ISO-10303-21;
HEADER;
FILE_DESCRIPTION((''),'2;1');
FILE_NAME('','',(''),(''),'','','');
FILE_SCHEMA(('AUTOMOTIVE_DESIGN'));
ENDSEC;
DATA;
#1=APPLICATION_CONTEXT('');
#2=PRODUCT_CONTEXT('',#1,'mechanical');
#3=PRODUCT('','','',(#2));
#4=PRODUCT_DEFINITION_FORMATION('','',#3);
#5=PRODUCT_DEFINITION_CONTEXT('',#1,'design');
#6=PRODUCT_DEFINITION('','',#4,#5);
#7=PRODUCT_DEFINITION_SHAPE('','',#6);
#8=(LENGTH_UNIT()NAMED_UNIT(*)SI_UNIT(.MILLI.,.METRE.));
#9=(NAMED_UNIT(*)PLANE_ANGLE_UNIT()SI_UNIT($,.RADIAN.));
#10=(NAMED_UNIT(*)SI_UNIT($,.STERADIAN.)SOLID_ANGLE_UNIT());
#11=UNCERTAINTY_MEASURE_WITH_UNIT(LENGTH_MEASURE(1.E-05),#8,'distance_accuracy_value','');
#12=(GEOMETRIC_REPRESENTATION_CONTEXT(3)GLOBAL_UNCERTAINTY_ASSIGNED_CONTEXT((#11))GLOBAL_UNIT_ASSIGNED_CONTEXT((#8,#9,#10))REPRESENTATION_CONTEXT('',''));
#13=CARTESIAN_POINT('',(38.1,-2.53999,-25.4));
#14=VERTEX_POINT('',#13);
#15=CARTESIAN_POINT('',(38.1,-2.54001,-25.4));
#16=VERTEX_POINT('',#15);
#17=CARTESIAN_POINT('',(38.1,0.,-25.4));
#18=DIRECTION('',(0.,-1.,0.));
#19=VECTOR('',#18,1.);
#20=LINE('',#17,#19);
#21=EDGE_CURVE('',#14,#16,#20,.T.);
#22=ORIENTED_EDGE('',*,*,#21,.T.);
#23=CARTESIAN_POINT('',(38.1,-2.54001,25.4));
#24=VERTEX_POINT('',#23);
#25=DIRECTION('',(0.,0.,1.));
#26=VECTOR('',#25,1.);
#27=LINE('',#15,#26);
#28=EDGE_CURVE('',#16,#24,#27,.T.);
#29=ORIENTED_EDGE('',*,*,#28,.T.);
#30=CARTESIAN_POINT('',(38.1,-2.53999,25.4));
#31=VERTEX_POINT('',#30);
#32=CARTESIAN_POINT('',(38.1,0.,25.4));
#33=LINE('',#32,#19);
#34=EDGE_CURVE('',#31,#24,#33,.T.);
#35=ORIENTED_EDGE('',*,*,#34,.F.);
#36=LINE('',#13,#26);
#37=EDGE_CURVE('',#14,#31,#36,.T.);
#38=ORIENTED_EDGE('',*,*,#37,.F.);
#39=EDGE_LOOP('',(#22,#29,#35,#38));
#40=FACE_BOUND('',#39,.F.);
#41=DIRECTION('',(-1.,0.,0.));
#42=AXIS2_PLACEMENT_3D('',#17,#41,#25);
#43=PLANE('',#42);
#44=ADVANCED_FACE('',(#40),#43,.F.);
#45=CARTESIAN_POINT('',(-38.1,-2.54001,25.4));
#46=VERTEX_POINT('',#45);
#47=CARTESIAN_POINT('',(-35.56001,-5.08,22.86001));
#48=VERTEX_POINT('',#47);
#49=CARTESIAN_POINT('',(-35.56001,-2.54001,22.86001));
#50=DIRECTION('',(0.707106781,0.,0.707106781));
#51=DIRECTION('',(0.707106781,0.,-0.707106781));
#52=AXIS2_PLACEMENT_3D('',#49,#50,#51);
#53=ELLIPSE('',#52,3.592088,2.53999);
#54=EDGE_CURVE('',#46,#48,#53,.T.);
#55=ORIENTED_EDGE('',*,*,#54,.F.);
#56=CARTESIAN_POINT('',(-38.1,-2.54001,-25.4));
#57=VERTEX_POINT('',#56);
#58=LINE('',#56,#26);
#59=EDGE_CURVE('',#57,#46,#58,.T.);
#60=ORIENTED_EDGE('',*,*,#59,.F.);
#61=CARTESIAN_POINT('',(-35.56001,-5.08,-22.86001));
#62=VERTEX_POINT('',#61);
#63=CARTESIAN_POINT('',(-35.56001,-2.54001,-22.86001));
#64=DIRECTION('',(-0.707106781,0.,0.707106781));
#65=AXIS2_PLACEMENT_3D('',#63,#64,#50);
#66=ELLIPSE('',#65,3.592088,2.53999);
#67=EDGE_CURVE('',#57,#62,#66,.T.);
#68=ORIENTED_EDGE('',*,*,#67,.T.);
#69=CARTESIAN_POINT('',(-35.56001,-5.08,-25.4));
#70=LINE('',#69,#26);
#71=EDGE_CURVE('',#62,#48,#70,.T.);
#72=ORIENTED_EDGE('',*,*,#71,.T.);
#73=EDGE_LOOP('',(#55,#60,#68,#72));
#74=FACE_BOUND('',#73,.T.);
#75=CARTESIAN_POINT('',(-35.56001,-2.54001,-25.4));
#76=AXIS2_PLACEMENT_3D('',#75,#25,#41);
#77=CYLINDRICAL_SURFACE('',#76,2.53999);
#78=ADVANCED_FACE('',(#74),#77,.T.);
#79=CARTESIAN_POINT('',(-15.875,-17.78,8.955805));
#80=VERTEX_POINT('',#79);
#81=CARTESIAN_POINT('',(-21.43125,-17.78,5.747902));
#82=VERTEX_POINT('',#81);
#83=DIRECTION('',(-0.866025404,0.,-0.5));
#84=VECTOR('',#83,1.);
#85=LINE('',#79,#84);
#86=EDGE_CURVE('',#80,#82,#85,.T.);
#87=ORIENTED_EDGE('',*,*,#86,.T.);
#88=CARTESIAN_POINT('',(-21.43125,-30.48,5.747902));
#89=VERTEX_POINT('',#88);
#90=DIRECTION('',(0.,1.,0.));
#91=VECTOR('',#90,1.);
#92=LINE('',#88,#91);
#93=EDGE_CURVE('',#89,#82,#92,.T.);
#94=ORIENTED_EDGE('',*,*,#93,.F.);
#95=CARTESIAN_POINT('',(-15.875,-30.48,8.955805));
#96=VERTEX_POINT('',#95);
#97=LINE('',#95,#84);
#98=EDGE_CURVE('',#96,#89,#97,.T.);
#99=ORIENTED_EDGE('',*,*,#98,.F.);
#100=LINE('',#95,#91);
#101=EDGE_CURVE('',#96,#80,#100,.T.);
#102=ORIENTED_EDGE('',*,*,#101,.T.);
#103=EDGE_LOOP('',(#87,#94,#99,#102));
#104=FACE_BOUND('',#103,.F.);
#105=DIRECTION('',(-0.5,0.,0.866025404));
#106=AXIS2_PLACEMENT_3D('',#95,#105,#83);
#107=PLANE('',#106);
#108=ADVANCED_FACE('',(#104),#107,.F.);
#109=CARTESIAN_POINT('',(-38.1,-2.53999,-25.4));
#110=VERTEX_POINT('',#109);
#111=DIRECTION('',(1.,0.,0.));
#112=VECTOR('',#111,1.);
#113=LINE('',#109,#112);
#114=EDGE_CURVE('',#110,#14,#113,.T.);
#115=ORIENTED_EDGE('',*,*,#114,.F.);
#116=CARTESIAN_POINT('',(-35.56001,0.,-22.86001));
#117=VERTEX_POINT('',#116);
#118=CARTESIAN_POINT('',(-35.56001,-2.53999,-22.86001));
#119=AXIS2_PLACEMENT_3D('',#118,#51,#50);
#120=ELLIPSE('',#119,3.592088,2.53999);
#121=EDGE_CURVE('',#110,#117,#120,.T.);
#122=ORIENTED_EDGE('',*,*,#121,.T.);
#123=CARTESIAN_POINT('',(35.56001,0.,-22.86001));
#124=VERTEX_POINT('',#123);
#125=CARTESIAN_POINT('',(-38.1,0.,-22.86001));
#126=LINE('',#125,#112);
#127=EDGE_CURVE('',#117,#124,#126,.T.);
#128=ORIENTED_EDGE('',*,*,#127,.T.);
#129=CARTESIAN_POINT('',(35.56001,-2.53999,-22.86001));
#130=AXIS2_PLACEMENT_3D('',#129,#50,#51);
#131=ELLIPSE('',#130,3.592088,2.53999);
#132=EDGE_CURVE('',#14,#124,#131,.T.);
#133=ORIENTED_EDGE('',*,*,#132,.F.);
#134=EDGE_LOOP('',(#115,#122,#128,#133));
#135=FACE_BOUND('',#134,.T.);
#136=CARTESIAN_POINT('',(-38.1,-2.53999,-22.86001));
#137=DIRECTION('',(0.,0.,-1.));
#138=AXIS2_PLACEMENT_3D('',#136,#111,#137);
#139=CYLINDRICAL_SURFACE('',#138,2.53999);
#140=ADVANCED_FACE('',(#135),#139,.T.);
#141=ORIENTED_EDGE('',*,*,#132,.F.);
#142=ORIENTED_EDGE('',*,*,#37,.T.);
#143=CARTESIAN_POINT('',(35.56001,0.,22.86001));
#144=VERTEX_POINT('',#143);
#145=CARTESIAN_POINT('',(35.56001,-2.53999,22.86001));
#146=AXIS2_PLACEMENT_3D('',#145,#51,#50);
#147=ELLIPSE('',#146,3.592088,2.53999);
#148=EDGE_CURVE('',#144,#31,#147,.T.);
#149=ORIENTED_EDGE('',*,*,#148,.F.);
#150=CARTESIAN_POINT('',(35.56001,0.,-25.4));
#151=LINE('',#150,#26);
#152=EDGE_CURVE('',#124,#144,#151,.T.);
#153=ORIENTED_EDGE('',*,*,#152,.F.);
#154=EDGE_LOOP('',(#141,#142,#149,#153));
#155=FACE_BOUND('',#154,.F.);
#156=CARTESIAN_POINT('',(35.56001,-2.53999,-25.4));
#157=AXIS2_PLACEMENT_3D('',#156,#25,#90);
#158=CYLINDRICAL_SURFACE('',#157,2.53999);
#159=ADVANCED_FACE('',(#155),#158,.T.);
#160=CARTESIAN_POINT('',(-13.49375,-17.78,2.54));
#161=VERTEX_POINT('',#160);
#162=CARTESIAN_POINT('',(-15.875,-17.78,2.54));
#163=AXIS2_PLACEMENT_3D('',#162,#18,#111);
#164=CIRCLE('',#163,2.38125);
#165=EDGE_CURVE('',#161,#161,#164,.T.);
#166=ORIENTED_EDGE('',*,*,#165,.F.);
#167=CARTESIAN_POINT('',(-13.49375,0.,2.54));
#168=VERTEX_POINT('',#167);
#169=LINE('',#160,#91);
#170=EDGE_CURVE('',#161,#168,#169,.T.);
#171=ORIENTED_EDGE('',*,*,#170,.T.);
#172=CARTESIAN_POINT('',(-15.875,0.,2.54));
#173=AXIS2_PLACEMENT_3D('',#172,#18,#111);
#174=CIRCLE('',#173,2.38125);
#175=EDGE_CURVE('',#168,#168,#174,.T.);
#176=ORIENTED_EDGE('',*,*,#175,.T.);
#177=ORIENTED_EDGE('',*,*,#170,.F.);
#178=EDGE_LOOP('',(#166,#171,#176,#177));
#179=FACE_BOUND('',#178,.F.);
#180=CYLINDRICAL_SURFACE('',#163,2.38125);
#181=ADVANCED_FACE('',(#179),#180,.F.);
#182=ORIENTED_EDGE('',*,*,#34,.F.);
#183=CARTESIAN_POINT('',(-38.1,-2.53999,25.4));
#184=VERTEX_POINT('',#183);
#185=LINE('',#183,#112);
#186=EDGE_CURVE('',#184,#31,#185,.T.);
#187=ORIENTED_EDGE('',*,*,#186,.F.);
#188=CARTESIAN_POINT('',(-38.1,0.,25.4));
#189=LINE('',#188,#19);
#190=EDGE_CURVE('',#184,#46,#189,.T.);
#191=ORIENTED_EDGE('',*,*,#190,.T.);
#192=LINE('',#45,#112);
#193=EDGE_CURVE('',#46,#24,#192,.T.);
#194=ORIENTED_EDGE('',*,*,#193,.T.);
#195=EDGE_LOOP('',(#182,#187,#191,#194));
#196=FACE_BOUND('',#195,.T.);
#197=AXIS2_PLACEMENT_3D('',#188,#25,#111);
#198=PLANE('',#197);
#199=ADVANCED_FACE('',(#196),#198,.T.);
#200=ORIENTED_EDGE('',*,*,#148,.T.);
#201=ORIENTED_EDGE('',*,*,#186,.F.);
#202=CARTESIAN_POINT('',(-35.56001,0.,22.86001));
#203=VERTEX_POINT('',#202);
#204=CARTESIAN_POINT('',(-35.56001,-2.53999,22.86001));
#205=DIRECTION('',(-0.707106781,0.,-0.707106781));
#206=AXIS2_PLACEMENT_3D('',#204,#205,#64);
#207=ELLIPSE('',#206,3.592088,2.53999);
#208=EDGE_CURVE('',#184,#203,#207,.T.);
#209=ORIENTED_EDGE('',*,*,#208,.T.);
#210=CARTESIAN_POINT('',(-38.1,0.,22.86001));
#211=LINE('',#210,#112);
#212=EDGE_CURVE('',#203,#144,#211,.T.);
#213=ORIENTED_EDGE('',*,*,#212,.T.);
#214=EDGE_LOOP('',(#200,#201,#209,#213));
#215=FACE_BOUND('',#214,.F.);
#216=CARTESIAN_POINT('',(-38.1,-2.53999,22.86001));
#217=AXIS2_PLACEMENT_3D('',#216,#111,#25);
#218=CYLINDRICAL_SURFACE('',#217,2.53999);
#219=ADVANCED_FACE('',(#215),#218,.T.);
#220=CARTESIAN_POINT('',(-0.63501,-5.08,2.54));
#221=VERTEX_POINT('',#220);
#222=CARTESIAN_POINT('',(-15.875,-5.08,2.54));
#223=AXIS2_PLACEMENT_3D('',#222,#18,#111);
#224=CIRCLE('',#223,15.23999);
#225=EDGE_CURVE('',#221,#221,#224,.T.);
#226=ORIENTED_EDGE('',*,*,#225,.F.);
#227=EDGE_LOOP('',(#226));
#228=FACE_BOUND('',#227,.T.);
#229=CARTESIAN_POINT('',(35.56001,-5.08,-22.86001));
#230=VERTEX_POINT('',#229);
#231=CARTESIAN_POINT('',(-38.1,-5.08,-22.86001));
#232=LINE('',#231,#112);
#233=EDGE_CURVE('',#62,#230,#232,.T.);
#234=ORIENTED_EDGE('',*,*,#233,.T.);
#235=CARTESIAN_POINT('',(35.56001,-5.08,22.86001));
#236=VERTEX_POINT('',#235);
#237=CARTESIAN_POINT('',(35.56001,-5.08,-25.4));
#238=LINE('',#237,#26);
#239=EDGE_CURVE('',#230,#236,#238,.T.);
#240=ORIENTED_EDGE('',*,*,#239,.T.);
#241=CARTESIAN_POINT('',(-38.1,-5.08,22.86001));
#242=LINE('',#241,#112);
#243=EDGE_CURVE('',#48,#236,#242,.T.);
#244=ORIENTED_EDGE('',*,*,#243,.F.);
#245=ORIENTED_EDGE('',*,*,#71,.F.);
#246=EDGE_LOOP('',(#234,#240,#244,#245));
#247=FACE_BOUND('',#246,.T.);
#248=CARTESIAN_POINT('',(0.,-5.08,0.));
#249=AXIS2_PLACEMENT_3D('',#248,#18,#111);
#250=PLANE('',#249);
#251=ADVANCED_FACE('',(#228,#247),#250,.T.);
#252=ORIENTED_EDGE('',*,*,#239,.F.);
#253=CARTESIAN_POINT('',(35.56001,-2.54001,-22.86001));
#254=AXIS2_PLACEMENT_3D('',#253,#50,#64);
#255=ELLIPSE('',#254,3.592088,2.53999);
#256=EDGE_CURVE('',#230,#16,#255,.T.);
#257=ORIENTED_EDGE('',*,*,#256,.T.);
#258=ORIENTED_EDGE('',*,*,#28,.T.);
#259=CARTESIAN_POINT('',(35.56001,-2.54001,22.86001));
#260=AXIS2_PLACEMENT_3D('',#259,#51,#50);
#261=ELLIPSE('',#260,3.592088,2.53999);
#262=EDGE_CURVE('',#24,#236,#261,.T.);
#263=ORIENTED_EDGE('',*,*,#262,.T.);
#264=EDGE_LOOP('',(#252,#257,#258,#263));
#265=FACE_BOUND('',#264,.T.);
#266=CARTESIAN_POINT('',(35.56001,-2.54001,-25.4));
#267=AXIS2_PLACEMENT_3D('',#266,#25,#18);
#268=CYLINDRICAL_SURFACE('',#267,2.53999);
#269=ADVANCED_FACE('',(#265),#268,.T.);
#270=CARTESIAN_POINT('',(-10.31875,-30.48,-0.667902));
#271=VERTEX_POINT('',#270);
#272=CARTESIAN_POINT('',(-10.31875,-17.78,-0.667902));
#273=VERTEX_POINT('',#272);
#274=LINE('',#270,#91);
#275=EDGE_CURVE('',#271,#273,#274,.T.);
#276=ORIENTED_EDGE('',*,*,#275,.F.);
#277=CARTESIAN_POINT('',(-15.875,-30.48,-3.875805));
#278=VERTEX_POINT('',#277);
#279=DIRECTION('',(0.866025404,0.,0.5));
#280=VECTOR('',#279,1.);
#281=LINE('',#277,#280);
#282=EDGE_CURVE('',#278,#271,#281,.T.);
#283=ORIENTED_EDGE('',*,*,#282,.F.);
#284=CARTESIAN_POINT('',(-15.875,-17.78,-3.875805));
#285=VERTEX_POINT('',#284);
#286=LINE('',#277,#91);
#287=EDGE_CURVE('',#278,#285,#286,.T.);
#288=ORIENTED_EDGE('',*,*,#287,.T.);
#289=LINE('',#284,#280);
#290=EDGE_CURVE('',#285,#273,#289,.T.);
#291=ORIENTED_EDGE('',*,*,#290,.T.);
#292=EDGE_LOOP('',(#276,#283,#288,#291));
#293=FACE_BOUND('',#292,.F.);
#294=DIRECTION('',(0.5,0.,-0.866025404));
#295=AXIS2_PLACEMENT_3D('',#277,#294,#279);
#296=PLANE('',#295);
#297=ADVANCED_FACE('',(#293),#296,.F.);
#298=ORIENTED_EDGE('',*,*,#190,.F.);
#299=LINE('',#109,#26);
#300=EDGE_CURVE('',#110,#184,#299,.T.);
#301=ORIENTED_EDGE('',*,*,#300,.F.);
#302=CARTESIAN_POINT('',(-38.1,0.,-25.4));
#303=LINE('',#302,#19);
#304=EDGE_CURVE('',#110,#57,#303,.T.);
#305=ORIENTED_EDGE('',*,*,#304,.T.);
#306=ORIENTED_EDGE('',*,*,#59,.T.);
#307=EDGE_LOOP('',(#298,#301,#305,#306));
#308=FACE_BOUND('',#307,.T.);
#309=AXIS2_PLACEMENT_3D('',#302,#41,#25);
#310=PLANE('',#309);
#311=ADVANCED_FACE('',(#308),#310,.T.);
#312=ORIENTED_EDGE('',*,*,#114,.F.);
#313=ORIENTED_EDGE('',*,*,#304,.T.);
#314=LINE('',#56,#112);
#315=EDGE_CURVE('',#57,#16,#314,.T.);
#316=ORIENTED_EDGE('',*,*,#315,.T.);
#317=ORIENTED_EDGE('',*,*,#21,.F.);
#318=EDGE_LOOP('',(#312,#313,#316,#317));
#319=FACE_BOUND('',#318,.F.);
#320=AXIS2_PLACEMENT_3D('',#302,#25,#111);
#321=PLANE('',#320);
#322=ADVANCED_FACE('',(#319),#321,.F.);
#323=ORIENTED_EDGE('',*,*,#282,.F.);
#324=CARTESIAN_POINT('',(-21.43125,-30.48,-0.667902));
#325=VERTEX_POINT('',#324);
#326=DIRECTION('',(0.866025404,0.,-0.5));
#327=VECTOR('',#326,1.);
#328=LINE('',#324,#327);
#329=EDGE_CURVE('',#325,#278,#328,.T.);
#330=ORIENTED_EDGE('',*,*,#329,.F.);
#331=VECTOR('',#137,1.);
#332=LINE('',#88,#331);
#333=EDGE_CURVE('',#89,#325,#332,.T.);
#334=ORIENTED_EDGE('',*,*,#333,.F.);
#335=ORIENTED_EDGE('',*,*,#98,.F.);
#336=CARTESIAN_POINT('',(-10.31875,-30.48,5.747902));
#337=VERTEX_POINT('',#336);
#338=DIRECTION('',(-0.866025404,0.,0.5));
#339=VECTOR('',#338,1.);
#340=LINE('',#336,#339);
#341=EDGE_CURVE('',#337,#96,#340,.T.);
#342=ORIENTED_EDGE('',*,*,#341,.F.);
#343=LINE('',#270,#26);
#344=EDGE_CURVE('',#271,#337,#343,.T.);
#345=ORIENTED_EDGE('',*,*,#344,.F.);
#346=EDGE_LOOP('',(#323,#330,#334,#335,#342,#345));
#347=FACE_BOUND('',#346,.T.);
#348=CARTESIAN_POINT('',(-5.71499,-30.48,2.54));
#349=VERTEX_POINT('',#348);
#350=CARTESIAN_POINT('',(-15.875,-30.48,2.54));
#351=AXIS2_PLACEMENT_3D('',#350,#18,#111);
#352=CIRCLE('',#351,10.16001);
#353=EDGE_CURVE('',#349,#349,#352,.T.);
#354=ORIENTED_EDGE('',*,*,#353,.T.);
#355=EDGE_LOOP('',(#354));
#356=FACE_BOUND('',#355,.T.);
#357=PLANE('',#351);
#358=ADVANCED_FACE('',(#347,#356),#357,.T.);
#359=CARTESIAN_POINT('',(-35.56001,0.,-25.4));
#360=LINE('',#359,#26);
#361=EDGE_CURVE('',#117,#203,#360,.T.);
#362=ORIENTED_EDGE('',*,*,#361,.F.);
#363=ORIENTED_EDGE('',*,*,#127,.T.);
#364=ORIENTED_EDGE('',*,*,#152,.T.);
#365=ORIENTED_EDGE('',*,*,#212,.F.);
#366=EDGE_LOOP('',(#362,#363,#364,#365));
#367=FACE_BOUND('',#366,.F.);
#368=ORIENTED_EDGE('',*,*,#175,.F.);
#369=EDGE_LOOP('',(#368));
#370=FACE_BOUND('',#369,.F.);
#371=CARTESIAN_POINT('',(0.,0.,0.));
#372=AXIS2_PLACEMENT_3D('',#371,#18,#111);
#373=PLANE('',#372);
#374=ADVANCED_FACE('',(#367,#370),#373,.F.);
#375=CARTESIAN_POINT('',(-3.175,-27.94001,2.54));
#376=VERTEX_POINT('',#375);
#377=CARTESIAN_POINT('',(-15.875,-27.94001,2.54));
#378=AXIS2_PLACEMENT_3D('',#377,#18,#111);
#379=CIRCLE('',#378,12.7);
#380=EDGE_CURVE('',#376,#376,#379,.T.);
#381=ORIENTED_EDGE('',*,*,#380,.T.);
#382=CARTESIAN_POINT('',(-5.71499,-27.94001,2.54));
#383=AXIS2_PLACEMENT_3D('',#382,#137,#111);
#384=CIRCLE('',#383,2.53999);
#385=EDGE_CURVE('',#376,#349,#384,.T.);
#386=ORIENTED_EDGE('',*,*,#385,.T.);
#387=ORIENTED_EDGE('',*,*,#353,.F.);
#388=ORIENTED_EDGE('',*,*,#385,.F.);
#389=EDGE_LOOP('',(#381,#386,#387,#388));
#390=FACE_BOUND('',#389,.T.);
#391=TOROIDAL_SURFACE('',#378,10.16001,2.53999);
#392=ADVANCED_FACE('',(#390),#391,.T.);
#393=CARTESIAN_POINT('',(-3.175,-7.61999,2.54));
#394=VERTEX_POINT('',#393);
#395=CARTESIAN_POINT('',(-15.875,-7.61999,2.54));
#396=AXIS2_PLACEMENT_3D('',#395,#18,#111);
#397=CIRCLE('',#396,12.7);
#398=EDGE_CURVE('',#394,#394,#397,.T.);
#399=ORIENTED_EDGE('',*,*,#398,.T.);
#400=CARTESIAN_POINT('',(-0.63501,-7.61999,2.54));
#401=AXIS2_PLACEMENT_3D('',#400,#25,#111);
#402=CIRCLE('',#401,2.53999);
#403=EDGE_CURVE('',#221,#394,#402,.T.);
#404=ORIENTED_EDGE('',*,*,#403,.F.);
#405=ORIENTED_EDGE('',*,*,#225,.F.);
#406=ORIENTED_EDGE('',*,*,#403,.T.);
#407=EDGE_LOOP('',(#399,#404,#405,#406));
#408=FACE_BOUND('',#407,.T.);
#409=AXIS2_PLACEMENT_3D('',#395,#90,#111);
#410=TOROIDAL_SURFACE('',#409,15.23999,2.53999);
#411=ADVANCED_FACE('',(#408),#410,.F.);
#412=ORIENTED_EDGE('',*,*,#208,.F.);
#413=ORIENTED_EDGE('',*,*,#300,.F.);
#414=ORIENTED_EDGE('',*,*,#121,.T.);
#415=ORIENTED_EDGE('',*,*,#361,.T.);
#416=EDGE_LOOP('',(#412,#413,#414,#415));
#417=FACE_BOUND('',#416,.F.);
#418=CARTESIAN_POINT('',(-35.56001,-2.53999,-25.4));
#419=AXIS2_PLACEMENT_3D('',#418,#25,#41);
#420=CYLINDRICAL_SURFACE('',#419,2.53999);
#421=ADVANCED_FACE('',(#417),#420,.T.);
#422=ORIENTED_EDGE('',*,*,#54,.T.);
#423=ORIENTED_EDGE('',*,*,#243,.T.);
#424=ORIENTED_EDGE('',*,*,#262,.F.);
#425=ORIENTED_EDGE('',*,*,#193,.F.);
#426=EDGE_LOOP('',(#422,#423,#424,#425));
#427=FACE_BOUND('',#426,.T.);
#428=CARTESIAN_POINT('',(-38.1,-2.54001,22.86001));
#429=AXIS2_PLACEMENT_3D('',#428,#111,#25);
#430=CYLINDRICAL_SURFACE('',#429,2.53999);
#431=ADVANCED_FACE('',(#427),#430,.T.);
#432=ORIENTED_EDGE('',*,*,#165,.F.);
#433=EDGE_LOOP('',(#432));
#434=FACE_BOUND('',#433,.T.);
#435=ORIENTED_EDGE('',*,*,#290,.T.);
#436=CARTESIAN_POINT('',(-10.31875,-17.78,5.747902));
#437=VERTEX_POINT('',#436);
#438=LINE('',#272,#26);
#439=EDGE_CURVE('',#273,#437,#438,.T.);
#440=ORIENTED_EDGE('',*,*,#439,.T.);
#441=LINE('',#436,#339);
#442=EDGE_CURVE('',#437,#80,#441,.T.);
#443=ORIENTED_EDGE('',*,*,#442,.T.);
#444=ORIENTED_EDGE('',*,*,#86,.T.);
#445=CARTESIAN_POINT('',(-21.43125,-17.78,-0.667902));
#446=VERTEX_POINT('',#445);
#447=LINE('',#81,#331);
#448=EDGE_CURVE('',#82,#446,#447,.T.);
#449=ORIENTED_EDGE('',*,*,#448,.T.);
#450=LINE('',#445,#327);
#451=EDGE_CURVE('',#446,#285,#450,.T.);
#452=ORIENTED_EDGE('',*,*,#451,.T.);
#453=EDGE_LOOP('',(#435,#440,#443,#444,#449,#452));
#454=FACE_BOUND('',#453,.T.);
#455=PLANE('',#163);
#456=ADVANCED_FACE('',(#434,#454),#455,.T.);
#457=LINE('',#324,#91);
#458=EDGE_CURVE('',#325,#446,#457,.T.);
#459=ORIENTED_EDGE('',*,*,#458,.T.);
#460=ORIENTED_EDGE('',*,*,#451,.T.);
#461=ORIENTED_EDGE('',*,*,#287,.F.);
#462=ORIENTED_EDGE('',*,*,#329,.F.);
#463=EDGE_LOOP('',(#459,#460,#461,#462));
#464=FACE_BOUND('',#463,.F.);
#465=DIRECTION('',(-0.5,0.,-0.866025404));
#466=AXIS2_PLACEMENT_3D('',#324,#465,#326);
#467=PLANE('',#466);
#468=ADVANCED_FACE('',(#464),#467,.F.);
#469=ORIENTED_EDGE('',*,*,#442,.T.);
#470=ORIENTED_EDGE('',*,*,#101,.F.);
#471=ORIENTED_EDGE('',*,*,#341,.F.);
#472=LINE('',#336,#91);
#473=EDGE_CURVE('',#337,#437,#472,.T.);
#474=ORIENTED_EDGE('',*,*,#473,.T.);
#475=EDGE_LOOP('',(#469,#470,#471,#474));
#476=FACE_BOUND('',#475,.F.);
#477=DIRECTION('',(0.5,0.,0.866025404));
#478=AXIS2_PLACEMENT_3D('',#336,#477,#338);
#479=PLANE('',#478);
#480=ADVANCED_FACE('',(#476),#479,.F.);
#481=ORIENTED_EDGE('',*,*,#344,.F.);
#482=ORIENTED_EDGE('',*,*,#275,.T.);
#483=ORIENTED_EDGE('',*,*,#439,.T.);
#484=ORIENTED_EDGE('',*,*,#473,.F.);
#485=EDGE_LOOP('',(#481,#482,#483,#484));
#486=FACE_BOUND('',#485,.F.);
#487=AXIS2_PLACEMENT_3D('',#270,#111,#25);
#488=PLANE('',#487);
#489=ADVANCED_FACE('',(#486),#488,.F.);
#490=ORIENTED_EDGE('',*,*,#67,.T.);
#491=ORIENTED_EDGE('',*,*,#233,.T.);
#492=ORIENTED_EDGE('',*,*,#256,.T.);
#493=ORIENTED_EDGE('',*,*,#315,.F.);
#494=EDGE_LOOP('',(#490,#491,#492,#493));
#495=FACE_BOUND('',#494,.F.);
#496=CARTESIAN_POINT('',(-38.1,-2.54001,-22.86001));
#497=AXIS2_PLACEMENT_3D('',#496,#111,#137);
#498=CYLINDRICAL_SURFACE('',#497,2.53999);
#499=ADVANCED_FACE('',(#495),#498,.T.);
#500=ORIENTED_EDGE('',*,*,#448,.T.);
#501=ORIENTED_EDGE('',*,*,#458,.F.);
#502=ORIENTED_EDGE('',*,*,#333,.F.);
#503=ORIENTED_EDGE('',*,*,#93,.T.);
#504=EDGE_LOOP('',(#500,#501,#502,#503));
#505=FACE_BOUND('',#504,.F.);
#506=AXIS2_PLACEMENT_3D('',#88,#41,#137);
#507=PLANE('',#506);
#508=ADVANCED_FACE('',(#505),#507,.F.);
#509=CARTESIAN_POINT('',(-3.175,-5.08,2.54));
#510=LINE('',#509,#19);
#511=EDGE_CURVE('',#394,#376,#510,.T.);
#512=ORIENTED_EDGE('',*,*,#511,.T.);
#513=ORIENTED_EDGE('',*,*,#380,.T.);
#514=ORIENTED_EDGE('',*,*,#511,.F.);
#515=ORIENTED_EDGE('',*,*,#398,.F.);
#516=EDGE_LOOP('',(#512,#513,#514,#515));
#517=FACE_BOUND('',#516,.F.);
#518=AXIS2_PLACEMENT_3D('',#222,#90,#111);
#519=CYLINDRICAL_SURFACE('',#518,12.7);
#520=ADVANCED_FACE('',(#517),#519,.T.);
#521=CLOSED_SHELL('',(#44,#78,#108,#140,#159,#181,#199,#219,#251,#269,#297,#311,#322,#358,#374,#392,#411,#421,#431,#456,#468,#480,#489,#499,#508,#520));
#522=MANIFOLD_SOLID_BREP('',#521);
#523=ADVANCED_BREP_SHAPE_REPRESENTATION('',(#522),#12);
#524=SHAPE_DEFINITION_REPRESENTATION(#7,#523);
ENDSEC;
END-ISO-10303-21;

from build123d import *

# Parameters (mm, degrees)
F0_W     = 76.2
F0_H     = 50.8
F1_DEPTH = 5.08
F2_R     = 12.7
F3_DEPTH = 25.4
F5_DEPTH = 12.7
F6_R     = 2.38125
F7_DEPTH = 17.78
F8_R     = 2.53999


# Not quite as in the source:
# - a fillet or chamfer is up to 0.001 mm smaller than in the source, because OpenCascade refuses the exact size


with BuildPart() as f1:
    # F0 (on Front) → F1 (new body)
    with BuildSketch(Plane.XZ):
        Rectangle(F0_W, F0_H)
    extrude(amount=F1_DEPTH)

    # F2 (on face) → F3 (join)
    with BuildSketch(Plane.XZ.offset(5.08)):
        with Locations((-15.875, 2.54)):
            Circle(F2_R)
    extrude(amount=F3_DEPTH)

    # F4 (on face) → F5 (cut)
    with BuildSketch(Plane.XZ.offset(30.48)):
        Polygon((-10.31875, 5.7479024332), (-15.875, 8.9558048664), (-21.43125, 5.7479024332), (-21.43125, -0.6679024332), (-15.875, -3.8758048664), (-10.31875, -0.6679024332), align=None)
    extrude(amount=-F5_DEPTH, mode=Mode.SUBTRACT)

    # F6 (on face) → F7 (cut, through all)
    with BuildSketch(Plane.XZ.offset(17.78)):
        with Locations((-15.875, 2.54)):
            Circle(F6_R)
    extrude(amount=-F7_DEPTH, mode=Mode.SUBTRACT)

    # F8 (radius 2.54 in the source; OpenCascade refuses exactly that, so slightly less here)
    f8_edges = [f1.edges().sort_by_distance(p)[0] for p in [
        (-28.575, -30.48, 2.54),
        (-28.575, -5.08, 2.54),
        (0, -5.08, 25.4),
        (38.1, -5.08, 0),
        (0, -5.08, -25.4),
        (-38.1, -5.08, 0),
        (0, 0, -25.4),
        (-38.1, 0, 0),
        (38.1, 0, 0),
        (0, 0, 25.4),
    ]]
    fillet(f8_edges, radius=F8_R)


solid = f1.part
